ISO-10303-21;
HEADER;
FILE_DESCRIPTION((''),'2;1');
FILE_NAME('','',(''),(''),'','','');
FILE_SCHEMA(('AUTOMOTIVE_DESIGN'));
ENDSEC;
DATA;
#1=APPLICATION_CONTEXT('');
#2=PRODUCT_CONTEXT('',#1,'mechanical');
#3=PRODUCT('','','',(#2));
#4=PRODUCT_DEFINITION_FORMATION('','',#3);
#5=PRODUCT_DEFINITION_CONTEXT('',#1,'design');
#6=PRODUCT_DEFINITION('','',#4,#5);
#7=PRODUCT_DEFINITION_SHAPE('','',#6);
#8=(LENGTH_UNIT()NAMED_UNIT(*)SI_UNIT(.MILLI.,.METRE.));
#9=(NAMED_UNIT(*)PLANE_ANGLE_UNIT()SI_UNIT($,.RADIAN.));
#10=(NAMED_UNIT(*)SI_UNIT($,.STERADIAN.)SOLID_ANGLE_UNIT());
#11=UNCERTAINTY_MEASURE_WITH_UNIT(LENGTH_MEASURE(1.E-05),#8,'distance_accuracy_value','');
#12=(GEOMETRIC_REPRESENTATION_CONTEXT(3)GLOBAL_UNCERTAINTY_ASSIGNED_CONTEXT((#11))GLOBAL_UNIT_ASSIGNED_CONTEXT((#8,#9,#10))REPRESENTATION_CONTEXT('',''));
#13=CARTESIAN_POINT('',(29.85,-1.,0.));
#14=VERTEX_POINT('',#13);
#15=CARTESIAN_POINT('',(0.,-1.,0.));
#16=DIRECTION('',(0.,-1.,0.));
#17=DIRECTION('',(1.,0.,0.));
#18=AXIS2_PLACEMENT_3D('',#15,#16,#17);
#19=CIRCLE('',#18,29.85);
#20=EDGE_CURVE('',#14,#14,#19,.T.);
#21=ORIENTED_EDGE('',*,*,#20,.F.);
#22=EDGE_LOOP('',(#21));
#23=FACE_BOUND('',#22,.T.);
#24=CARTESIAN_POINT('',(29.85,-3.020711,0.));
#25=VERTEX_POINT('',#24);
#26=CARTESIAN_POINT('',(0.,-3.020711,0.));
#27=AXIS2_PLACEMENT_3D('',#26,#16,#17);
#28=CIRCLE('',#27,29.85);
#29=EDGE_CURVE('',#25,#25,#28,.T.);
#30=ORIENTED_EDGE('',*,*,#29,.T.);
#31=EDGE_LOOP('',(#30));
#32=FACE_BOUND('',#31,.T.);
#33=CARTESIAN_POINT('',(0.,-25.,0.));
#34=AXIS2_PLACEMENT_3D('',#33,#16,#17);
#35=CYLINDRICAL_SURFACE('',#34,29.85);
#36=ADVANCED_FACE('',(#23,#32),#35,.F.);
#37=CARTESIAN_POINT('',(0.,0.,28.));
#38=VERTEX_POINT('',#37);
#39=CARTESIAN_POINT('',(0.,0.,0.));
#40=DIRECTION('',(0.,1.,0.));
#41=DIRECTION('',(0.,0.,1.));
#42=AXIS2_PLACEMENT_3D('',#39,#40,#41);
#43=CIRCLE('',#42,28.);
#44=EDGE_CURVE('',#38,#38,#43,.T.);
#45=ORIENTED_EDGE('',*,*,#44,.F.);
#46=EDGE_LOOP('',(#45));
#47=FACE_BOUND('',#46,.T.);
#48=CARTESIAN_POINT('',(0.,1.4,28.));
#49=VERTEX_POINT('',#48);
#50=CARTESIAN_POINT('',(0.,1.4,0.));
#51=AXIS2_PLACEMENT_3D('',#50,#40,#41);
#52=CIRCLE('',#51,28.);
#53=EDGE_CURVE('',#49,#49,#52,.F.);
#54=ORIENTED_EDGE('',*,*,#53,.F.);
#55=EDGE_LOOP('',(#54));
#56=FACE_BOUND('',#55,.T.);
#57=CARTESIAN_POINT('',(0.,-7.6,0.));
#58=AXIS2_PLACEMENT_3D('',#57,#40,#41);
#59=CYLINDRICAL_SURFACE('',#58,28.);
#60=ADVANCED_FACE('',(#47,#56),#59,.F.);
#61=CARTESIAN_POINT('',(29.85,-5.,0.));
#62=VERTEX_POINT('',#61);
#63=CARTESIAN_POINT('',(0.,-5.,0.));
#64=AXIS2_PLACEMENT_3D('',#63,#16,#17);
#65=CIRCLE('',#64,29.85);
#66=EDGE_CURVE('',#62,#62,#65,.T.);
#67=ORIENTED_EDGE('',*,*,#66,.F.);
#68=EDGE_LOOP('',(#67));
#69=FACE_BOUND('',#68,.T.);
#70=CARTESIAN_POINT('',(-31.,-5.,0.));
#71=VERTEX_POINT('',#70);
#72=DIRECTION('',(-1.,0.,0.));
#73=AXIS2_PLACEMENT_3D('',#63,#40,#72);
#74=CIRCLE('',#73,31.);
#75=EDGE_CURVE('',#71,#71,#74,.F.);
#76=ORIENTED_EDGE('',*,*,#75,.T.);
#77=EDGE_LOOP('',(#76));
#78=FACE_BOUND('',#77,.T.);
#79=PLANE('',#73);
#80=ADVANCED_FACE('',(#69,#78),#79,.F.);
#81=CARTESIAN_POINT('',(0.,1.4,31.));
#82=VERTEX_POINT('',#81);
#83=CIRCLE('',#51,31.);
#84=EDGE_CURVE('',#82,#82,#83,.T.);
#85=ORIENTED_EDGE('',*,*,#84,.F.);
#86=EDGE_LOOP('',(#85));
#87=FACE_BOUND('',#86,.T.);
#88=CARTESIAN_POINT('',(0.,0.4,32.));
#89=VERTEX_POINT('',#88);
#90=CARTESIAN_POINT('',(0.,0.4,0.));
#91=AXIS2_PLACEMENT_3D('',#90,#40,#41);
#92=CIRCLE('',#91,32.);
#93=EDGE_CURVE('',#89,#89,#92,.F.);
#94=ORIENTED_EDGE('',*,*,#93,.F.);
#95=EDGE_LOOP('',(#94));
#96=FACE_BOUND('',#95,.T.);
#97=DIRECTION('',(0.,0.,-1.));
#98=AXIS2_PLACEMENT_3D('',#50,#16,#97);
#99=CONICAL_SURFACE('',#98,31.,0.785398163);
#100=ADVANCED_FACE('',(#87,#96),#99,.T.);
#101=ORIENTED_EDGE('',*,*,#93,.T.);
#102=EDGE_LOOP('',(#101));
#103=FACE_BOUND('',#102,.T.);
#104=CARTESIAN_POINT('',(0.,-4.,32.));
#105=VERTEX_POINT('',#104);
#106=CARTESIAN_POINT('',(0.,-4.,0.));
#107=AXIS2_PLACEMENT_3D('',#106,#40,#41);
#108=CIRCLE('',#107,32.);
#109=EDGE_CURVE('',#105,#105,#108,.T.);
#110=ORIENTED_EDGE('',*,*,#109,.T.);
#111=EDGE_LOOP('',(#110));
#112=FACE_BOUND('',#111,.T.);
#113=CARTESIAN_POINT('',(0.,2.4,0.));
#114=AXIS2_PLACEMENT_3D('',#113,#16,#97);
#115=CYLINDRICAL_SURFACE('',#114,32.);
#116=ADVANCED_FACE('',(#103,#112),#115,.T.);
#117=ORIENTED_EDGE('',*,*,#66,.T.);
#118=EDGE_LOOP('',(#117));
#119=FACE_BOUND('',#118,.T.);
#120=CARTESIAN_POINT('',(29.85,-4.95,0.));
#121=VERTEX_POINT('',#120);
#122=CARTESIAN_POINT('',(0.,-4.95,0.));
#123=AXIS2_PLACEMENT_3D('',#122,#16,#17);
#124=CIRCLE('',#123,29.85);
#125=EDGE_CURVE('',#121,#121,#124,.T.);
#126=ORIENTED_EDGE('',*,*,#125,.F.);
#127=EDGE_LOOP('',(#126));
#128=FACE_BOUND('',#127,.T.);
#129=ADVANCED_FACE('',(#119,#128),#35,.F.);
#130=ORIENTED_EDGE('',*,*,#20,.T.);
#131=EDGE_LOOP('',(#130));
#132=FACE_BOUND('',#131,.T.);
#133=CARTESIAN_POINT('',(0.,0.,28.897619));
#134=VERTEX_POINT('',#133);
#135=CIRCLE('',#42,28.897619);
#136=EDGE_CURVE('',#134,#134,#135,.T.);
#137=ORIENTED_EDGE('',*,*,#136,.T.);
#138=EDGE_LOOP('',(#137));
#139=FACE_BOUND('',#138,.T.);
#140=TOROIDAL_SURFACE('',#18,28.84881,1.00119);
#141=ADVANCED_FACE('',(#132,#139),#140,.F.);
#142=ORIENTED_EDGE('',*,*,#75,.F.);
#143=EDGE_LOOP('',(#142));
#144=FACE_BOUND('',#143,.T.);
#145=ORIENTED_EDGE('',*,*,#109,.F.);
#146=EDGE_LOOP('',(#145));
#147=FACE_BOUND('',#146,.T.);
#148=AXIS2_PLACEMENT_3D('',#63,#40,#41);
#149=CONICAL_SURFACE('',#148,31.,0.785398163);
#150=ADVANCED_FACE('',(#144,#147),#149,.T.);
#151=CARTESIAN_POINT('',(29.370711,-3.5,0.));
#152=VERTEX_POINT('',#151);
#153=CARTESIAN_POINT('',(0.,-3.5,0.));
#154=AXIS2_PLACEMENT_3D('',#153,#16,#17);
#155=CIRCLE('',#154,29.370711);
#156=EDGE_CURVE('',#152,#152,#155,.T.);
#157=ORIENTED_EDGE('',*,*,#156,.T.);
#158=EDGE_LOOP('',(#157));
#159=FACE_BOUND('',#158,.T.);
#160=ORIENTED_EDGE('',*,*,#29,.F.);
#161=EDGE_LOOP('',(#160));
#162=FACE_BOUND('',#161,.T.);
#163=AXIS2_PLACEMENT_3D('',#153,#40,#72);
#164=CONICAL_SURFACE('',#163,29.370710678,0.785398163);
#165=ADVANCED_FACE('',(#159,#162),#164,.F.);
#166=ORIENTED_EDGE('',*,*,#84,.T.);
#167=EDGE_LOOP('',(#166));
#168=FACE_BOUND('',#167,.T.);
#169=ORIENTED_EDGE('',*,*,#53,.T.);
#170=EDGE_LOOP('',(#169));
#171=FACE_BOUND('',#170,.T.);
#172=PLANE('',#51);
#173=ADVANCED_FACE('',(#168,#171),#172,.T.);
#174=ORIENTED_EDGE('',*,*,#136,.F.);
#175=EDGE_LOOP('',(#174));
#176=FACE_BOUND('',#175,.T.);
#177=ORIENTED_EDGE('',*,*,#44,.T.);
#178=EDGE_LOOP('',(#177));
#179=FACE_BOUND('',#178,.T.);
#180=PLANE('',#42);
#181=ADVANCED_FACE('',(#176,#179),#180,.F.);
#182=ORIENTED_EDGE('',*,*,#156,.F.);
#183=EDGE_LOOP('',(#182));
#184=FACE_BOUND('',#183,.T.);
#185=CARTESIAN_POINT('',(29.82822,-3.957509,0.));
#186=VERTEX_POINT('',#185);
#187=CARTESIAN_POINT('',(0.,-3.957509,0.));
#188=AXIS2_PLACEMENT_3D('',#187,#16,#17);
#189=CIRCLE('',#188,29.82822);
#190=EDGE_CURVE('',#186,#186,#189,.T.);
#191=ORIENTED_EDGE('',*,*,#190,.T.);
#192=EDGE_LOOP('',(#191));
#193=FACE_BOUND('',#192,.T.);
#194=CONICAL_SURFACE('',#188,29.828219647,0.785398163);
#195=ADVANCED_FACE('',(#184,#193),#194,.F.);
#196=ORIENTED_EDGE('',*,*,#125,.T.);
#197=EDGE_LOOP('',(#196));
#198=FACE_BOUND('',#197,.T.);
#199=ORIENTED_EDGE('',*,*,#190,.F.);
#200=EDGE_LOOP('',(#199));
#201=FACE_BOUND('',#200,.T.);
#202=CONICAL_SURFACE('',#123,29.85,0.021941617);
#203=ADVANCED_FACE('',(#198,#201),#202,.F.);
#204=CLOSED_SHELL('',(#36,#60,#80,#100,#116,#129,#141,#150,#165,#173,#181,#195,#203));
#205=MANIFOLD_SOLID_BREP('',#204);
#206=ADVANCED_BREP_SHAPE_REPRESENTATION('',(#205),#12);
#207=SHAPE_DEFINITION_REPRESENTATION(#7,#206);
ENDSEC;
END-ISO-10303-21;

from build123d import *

# Parameters (mm, degrees)
SKETCH_1_R          = 32
EXTRUDE_1_DEPTH     = 2.4
SKETCH_3_R          = 28
CUT_EXTRUDE_1_DEPTH = 10
SKETCH_4_R          = 32
CUT_EXTRUDE_2_DEPTH = 1
CHAMFER_1_SIZE      = 1
CHAMFER_2_SIZE      = 1


with BuildPart() as part:
    # 草图1 → 凸台-拉伸1 (new body)
    with BuildSketch(Plane(origin=(0, 0, 0), x_dir=(1, 0, 0), z_dir=(0, 1, 0))):
        Circle(SKETCH_1_R)
    extrude(amount=EXTRUDE_1_DEPTH)

    # 草图2 → 旋转1 (revolve)
    with BuildSketch(Plane.XY):
        with BuildLine():
            Line((32, 0), (28.897619048, 0))
            ThreePointArc((28.897619048, 0), (29.573809524, -0.30952381), (29.85, -1))
            Line((29.85, -1), (29.85, -3.020710678))
            Line((29.85, -3.020710678), (29.370710678, -3.5))
            Line((29.370710678, -3.5), (29.828219647, -3.957508969))
            Line((29.828219647, -3.957508969), (29.85, -4.95))
            Line((29.85, -4.95), (29.85, -5))
            Line((29.85, -5), (31, -5))
            Line((31, -5), (32, -5))
            Line((32, -5), (32, 0))
        make_face()
    revolve(axis=Axis((0, -25, 0), (0, 1, 0)))

    # 草图3 → 切除-拉伸1 (cut)
    with BuildSketch(Plane(origin=(0, 2.4, 0), x_dir=(1, 0, 0), z_dir=(0, 1, 0))):
        Circle(SKETCH_3_R)
    extrude(amount=-CUT_EXTRUDE_1_DEPTH, mode=Mode.SUBTRACT)

    # 草图4 → 切除-拉伸2 (cut)
    with BuildSketch(Plane(origin=(0, 2.4, 0), x_dir=(1, 0, 0), z_dir=(0, 1, 0))):
        Circle(SKETCH_4_R)
    extrude(amount=-CUT_EXTRUDE_2_DEPTH, mode=Mode.SUBTRACT)

    # 倒角1
    chamfer_1_edges = [part.edges().sort_by_distance(p)[0] for p in [
        (-32, -5, 0),
    ]]
    chamfer(chamfer_1_edges, length=CHAMFER_1_SIZE)

    # 倒角2
    chamfer_2_edges = [part.edges().sort_by_distance(p)[0] for p in [
        (-32, 1.4, 0),
    ]]
    chamfer(chamfer_2_edges, length=CHAMFER_2_SIZE)


solid = part.part
